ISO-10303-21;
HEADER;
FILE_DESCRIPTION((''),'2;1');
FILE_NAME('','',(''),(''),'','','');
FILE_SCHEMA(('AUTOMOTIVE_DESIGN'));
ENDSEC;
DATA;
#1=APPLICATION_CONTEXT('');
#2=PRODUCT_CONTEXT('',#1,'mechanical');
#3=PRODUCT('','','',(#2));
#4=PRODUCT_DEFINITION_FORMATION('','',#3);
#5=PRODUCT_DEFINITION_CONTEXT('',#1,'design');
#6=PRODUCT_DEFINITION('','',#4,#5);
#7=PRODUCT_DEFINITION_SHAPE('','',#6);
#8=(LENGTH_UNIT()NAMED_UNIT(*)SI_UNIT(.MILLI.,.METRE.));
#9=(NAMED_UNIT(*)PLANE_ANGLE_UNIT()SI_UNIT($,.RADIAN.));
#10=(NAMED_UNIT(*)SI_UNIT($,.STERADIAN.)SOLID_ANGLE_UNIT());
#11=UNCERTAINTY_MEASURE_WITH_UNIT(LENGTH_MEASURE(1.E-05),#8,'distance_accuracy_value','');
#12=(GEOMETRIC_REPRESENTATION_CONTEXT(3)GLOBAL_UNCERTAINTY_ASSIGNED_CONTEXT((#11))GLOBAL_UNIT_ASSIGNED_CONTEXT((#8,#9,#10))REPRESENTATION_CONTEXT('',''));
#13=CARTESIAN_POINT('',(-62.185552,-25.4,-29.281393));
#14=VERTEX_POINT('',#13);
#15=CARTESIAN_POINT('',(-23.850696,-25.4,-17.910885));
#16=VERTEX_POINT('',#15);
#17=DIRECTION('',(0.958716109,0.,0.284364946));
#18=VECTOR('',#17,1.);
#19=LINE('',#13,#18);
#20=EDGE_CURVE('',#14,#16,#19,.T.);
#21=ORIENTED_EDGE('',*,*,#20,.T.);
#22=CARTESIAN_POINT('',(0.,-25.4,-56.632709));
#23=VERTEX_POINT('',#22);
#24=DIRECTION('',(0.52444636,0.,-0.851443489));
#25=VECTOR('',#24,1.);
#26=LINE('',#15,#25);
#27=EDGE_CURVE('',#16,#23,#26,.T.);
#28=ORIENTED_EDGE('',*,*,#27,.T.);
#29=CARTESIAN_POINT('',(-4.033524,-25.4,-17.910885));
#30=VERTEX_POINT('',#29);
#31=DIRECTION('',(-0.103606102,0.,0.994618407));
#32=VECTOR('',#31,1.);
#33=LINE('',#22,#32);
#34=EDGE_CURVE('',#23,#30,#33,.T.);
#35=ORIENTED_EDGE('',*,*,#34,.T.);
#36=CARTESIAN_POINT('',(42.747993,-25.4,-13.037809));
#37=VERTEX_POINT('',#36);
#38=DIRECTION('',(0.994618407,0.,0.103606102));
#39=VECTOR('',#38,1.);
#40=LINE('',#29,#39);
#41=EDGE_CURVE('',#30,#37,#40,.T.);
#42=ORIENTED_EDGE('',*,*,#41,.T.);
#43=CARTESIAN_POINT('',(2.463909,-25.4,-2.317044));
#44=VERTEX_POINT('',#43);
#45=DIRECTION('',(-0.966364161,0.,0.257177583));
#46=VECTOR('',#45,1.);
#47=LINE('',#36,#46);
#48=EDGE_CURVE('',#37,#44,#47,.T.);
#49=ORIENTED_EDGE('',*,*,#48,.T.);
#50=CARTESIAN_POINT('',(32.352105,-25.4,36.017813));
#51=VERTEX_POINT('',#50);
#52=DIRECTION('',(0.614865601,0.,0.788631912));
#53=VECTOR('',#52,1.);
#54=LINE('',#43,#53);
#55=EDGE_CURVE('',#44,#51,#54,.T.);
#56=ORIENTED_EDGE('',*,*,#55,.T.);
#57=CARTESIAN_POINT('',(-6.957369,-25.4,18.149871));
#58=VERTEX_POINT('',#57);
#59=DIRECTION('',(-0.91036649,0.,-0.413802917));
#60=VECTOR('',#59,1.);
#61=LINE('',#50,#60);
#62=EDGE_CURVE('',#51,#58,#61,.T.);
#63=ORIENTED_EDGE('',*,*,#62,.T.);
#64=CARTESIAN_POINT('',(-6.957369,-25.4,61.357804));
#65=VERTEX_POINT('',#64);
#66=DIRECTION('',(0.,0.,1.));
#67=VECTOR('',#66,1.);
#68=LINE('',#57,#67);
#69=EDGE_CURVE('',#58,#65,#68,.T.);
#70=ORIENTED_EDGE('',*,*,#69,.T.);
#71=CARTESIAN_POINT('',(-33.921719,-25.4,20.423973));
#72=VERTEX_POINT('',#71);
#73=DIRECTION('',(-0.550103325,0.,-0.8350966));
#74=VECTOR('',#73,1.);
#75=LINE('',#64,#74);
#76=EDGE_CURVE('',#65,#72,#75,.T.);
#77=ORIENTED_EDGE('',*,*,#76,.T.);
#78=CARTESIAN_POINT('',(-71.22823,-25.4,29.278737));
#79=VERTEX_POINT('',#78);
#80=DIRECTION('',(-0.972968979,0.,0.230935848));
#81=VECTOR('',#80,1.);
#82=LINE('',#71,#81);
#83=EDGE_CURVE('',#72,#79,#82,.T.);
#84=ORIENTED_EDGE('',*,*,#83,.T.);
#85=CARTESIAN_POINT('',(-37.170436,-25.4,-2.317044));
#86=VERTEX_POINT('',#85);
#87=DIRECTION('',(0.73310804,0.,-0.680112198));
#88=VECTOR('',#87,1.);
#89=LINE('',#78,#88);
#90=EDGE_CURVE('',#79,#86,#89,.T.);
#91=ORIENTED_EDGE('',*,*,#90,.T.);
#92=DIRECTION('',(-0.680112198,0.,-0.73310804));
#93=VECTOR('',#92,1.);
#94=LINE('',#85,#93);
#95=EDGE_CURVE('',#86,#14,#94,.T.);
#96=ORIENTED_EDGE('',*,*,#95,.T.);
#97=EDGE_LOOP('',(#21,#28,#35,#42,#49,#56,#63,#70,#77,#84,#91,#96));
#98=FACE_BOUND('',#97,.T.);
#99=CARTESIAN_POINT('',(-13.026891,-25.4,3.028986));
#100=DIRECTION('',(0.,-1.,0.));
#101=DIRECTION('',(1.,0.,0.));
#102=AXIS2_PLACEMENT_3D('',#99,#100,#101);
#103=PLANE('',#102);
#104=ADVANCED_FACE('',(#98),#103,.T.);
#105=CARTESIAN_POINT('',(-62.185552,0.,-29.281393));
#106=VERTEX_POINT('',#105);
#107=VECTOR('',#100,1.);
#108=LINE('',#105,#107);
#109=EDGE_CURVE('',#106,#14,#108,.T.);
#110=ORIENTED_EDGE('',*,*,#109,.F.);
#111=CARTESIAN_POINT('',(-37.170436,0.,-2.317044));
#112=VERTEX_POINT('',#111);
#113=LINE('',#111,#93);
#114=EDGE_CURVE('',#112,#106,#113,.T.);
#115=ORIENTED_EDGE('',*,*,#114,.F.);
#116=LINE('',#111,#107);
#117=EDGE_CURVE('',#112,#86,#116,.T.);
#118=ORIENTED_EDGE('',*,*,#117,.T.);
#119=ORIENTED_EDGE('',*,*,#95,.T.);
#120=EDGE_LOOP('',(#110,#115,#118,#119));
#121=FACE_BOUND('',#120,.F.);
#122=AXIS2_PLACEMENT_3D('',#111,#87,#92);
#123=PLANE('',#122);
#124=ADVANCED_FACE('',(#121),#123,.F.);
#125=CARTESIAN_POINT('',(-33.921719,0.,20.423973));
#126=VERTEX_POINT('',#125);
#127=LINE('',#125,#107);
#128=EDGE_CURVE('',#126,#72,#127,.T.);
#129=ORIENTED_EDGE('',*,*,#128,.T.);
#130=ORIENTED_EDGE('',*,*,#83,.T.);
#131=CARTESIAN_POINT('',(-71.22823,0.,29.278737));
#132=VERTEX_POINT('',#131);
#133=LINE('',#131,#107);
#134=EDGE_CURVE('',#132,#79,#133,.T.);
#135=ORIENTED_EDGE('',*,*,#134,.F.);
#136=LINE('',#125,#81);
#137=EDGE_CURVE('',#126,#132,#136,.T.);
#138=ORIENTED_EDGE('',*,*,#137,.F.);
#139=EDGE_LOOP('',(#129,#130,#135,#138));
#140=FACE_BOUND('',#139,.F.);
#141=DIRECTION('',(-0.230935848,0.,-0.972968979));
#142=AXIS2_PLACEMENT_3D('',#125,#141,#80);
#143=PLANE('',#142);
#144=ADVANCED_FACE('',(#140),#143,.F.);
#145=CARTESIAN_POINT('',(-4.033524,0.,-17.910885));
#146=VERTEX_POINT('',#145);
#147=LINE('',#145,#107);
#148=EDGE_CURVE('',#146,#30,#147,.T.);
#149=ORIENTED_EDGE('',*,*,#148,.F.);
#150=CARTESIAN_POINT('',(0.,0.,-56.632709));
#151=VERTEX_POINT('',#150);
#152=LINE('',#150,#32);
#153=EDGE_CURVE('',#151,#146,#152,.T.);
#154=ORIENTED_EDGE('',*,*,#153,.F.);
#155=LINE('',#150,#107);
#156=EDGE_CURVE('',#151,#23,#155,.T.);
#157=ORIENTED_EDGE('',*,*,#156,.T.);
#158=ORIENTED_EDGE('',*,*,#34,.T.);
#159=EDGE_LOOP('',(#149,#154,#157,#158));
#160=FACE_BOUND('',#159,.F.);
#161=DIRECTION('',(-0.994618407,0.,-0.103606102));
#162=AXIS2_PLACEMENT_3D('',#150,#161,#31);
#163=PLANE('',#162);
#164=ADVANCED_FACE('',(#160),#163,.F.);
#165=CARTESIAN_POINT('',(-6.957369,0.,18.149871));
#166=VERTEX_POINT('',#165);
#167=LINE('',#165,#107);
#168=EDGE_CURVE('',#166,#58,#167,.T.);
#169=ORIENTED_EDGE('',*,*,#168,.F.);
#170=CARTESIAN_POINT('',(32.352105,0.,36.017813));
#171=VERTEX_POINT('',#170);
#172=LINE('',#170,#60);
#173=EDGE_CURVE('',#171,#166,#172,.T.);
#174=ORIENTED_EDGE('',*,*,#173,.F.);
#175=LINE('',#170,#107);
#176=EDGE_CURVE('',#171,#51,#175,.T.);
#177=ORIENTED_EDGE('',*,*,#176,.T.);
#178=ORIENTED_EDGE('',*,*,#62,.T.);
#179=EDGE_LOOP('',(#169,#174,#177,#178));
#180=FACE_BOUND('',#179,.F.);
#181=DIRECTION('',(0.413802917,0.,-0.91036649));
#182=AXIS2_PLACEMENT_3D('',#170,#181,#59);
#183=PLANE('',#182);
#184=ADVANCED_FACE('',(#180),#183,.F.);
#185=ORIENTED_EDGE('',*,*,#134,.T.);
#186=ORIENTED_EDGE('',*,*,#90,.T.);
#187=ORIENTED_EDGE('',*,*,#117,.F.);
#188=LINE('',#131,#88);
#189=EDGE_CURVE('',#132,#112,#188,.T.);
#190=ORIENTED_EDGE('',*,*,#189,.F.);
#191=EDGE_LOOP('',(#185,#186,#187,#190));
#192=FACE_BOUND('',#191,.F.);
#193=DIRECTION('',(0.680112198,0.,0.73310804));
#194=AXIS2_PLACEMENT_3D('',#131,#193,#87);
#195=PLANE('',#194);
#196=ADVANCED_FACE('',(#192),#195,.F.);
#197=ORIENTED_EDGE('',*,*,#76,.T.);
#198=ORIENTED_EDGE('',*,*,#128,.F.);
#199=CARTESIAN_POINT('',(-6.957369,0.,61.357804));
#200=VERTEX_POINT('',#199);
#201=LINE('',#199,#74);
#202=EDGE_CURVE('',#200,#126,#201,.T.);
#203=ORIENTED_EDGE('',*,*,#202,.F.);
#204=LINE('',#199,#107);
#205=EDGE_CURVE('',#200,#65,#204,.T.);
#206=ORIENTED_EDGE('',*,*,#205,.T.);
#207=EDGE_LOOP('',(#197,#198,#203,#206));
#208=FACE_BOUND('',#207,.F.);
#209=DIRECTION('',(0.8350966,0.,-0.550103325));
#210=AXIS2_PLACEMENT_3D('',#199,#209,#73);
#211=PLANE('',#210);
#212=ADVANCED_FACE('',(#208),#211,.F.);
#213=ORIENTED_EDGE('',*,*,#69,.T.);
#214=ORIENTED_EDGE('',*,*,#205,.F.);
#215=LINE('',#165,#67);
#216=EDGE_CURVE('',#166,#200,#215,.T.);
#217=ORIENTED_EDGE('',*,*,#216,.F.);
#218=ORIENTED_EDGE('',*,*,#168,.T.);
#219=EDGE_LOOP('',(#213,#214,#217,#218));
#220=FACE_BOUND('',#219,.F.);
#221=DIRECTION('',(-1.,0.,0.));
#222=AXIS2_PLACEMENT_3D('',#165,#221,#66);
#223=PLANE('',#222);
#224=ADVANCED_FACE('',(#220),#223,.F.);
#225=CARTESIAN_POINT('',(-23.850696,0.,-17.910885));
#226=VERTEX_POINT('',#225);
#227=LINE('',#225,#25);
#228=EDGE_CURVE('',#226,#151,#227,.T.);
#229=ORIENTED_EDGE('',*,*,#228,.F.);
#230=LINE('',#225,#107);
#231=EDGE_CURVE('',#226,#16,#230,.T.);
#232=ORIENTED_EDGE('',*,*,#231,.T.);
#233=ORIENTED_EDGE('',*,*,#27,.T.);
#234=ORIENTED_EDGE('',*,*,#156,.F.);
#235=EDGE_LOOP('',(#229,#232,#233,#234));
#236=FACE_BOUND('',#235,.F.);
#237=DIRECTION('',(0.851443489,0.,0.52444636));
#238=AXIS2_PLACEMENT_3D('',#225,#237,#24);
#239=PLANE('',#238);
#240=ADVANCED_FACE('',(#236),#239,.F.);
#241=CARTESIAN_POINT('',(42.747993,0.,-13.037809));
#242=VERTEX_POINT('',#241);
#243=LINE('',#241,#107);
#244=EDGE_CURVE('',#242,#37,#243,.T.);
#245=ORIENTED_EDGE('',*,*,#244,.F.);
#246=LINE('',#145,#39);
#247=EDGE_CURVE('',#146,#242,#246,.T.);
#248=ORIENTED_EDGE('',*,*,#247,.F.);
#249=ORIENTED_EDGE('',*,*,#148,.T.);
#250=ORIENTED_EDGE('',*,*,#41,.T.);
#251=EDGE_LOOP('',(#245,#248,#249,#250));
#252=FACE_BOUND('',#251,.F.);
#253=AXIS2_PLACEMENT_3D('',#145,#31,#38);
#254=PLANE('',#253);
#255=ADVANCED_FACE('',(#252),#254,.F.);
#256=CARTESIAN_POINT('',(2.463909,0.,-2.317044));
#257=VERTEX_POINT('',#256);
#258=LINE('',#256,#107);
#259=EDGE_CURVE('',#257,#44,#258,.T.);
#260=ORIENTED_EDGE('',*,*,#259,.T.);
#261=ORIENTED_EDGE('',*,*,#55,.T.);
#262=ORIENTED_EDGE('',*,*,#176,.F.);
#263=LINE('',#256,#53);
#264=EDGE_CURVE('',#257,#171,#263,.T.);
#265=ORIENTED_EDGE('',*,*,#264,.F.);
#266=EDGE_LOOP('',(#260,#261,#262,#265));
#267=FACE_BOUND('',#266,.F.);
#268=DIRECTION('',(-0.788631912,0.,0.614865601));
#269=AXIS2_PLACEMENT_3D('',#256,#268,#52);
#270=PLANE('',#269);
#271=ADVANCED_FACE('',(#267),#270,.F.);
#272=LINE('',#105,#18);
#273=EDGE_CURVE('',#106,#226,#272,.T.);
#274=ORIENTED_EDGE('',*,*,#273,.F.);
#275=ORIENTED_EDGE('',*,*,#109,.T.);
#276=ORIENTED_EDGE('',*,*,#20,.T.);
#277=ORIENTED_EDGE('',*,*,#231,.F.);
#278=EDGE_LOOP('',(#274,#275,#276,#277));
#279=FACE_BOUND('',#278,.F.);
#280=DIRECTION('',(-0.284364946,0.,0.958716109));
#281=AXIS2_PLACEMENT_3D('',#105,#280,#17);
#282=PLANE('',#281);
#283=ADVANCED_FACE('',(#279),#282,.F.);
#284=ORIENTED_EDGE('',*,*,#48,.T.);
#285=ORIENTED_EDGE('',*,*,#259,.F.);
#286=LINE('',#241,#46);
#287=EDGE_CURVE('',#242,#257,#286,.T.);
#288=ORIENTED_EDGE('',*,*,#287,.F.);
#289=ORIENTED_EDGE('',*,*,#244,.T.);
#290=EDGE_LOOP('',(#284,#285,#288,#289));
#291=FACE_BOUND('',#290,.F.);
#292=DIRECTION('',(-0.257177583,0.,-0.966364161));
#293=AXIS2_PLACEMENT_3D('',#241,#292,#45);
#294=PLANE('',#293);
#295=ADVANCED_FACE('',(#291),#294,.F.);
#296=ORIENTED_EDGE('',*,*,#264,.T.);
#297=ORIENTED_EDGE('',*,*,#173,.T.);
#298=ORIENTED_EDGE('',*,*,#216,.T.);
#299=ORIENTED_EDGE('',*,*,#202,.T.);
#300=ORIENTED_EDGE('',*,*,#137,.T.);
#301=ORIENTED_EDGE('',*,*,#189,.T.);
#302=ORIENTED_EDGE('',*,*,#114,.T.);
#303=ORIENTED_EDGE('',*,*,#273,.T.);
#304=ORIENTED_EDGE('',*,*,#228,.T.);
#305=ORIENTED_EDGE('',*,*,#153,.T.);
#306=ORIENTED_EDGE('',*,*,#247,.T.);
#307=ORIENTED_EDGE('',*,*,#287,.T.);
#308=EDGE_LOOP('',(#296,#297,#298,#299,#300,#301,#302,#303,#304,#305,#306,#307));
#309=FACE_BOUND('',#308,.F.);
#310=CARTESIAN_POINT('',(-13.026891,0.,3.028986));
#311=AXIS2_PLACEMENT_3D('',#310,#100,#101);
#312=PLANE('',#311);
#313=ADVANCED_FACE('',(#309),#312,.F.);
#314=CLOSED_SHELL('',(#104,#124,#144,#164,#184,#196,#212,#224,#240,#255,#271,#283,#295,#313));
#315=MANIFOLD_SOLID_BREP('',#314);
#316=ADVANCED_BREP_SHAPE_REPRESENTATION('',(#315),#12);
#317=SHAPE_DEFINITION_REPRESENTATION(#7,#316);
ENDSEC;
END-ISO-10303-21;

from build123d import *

# Parameters (mm, degrees)
F1_DEPTH = 25.4


# Not quite as in the source:
# - the program builds the solid bodies; features that only make, move or delete a surface that nothing else refers to are left out


with BuildPart() as f1:
    # F0 (on Front) → F1 (new body)
    with BuildSketch(Plane.XZ):
        Polygon((-6.9573693909, 61.3578036427), (-33.9217185974, 20.4239729792), (-71.2282304079, 29.2787372488), (-37.1704362333, -2.3170439526), (-62.1855519712, -29.2813926935), (-23.8506961614, -17.9108846933), (0, -56.6327092838), (-4.0335240774, -17.9108846933), (42.7479930222, -13.0378091708), (2.4639093317, -2.3170439526), (32.3521047831, 36.0178127885), (-6.9573693909, 18.1498713791), align=None)
    extrude(amount=F1_DEPTH)


solid = f1.part
